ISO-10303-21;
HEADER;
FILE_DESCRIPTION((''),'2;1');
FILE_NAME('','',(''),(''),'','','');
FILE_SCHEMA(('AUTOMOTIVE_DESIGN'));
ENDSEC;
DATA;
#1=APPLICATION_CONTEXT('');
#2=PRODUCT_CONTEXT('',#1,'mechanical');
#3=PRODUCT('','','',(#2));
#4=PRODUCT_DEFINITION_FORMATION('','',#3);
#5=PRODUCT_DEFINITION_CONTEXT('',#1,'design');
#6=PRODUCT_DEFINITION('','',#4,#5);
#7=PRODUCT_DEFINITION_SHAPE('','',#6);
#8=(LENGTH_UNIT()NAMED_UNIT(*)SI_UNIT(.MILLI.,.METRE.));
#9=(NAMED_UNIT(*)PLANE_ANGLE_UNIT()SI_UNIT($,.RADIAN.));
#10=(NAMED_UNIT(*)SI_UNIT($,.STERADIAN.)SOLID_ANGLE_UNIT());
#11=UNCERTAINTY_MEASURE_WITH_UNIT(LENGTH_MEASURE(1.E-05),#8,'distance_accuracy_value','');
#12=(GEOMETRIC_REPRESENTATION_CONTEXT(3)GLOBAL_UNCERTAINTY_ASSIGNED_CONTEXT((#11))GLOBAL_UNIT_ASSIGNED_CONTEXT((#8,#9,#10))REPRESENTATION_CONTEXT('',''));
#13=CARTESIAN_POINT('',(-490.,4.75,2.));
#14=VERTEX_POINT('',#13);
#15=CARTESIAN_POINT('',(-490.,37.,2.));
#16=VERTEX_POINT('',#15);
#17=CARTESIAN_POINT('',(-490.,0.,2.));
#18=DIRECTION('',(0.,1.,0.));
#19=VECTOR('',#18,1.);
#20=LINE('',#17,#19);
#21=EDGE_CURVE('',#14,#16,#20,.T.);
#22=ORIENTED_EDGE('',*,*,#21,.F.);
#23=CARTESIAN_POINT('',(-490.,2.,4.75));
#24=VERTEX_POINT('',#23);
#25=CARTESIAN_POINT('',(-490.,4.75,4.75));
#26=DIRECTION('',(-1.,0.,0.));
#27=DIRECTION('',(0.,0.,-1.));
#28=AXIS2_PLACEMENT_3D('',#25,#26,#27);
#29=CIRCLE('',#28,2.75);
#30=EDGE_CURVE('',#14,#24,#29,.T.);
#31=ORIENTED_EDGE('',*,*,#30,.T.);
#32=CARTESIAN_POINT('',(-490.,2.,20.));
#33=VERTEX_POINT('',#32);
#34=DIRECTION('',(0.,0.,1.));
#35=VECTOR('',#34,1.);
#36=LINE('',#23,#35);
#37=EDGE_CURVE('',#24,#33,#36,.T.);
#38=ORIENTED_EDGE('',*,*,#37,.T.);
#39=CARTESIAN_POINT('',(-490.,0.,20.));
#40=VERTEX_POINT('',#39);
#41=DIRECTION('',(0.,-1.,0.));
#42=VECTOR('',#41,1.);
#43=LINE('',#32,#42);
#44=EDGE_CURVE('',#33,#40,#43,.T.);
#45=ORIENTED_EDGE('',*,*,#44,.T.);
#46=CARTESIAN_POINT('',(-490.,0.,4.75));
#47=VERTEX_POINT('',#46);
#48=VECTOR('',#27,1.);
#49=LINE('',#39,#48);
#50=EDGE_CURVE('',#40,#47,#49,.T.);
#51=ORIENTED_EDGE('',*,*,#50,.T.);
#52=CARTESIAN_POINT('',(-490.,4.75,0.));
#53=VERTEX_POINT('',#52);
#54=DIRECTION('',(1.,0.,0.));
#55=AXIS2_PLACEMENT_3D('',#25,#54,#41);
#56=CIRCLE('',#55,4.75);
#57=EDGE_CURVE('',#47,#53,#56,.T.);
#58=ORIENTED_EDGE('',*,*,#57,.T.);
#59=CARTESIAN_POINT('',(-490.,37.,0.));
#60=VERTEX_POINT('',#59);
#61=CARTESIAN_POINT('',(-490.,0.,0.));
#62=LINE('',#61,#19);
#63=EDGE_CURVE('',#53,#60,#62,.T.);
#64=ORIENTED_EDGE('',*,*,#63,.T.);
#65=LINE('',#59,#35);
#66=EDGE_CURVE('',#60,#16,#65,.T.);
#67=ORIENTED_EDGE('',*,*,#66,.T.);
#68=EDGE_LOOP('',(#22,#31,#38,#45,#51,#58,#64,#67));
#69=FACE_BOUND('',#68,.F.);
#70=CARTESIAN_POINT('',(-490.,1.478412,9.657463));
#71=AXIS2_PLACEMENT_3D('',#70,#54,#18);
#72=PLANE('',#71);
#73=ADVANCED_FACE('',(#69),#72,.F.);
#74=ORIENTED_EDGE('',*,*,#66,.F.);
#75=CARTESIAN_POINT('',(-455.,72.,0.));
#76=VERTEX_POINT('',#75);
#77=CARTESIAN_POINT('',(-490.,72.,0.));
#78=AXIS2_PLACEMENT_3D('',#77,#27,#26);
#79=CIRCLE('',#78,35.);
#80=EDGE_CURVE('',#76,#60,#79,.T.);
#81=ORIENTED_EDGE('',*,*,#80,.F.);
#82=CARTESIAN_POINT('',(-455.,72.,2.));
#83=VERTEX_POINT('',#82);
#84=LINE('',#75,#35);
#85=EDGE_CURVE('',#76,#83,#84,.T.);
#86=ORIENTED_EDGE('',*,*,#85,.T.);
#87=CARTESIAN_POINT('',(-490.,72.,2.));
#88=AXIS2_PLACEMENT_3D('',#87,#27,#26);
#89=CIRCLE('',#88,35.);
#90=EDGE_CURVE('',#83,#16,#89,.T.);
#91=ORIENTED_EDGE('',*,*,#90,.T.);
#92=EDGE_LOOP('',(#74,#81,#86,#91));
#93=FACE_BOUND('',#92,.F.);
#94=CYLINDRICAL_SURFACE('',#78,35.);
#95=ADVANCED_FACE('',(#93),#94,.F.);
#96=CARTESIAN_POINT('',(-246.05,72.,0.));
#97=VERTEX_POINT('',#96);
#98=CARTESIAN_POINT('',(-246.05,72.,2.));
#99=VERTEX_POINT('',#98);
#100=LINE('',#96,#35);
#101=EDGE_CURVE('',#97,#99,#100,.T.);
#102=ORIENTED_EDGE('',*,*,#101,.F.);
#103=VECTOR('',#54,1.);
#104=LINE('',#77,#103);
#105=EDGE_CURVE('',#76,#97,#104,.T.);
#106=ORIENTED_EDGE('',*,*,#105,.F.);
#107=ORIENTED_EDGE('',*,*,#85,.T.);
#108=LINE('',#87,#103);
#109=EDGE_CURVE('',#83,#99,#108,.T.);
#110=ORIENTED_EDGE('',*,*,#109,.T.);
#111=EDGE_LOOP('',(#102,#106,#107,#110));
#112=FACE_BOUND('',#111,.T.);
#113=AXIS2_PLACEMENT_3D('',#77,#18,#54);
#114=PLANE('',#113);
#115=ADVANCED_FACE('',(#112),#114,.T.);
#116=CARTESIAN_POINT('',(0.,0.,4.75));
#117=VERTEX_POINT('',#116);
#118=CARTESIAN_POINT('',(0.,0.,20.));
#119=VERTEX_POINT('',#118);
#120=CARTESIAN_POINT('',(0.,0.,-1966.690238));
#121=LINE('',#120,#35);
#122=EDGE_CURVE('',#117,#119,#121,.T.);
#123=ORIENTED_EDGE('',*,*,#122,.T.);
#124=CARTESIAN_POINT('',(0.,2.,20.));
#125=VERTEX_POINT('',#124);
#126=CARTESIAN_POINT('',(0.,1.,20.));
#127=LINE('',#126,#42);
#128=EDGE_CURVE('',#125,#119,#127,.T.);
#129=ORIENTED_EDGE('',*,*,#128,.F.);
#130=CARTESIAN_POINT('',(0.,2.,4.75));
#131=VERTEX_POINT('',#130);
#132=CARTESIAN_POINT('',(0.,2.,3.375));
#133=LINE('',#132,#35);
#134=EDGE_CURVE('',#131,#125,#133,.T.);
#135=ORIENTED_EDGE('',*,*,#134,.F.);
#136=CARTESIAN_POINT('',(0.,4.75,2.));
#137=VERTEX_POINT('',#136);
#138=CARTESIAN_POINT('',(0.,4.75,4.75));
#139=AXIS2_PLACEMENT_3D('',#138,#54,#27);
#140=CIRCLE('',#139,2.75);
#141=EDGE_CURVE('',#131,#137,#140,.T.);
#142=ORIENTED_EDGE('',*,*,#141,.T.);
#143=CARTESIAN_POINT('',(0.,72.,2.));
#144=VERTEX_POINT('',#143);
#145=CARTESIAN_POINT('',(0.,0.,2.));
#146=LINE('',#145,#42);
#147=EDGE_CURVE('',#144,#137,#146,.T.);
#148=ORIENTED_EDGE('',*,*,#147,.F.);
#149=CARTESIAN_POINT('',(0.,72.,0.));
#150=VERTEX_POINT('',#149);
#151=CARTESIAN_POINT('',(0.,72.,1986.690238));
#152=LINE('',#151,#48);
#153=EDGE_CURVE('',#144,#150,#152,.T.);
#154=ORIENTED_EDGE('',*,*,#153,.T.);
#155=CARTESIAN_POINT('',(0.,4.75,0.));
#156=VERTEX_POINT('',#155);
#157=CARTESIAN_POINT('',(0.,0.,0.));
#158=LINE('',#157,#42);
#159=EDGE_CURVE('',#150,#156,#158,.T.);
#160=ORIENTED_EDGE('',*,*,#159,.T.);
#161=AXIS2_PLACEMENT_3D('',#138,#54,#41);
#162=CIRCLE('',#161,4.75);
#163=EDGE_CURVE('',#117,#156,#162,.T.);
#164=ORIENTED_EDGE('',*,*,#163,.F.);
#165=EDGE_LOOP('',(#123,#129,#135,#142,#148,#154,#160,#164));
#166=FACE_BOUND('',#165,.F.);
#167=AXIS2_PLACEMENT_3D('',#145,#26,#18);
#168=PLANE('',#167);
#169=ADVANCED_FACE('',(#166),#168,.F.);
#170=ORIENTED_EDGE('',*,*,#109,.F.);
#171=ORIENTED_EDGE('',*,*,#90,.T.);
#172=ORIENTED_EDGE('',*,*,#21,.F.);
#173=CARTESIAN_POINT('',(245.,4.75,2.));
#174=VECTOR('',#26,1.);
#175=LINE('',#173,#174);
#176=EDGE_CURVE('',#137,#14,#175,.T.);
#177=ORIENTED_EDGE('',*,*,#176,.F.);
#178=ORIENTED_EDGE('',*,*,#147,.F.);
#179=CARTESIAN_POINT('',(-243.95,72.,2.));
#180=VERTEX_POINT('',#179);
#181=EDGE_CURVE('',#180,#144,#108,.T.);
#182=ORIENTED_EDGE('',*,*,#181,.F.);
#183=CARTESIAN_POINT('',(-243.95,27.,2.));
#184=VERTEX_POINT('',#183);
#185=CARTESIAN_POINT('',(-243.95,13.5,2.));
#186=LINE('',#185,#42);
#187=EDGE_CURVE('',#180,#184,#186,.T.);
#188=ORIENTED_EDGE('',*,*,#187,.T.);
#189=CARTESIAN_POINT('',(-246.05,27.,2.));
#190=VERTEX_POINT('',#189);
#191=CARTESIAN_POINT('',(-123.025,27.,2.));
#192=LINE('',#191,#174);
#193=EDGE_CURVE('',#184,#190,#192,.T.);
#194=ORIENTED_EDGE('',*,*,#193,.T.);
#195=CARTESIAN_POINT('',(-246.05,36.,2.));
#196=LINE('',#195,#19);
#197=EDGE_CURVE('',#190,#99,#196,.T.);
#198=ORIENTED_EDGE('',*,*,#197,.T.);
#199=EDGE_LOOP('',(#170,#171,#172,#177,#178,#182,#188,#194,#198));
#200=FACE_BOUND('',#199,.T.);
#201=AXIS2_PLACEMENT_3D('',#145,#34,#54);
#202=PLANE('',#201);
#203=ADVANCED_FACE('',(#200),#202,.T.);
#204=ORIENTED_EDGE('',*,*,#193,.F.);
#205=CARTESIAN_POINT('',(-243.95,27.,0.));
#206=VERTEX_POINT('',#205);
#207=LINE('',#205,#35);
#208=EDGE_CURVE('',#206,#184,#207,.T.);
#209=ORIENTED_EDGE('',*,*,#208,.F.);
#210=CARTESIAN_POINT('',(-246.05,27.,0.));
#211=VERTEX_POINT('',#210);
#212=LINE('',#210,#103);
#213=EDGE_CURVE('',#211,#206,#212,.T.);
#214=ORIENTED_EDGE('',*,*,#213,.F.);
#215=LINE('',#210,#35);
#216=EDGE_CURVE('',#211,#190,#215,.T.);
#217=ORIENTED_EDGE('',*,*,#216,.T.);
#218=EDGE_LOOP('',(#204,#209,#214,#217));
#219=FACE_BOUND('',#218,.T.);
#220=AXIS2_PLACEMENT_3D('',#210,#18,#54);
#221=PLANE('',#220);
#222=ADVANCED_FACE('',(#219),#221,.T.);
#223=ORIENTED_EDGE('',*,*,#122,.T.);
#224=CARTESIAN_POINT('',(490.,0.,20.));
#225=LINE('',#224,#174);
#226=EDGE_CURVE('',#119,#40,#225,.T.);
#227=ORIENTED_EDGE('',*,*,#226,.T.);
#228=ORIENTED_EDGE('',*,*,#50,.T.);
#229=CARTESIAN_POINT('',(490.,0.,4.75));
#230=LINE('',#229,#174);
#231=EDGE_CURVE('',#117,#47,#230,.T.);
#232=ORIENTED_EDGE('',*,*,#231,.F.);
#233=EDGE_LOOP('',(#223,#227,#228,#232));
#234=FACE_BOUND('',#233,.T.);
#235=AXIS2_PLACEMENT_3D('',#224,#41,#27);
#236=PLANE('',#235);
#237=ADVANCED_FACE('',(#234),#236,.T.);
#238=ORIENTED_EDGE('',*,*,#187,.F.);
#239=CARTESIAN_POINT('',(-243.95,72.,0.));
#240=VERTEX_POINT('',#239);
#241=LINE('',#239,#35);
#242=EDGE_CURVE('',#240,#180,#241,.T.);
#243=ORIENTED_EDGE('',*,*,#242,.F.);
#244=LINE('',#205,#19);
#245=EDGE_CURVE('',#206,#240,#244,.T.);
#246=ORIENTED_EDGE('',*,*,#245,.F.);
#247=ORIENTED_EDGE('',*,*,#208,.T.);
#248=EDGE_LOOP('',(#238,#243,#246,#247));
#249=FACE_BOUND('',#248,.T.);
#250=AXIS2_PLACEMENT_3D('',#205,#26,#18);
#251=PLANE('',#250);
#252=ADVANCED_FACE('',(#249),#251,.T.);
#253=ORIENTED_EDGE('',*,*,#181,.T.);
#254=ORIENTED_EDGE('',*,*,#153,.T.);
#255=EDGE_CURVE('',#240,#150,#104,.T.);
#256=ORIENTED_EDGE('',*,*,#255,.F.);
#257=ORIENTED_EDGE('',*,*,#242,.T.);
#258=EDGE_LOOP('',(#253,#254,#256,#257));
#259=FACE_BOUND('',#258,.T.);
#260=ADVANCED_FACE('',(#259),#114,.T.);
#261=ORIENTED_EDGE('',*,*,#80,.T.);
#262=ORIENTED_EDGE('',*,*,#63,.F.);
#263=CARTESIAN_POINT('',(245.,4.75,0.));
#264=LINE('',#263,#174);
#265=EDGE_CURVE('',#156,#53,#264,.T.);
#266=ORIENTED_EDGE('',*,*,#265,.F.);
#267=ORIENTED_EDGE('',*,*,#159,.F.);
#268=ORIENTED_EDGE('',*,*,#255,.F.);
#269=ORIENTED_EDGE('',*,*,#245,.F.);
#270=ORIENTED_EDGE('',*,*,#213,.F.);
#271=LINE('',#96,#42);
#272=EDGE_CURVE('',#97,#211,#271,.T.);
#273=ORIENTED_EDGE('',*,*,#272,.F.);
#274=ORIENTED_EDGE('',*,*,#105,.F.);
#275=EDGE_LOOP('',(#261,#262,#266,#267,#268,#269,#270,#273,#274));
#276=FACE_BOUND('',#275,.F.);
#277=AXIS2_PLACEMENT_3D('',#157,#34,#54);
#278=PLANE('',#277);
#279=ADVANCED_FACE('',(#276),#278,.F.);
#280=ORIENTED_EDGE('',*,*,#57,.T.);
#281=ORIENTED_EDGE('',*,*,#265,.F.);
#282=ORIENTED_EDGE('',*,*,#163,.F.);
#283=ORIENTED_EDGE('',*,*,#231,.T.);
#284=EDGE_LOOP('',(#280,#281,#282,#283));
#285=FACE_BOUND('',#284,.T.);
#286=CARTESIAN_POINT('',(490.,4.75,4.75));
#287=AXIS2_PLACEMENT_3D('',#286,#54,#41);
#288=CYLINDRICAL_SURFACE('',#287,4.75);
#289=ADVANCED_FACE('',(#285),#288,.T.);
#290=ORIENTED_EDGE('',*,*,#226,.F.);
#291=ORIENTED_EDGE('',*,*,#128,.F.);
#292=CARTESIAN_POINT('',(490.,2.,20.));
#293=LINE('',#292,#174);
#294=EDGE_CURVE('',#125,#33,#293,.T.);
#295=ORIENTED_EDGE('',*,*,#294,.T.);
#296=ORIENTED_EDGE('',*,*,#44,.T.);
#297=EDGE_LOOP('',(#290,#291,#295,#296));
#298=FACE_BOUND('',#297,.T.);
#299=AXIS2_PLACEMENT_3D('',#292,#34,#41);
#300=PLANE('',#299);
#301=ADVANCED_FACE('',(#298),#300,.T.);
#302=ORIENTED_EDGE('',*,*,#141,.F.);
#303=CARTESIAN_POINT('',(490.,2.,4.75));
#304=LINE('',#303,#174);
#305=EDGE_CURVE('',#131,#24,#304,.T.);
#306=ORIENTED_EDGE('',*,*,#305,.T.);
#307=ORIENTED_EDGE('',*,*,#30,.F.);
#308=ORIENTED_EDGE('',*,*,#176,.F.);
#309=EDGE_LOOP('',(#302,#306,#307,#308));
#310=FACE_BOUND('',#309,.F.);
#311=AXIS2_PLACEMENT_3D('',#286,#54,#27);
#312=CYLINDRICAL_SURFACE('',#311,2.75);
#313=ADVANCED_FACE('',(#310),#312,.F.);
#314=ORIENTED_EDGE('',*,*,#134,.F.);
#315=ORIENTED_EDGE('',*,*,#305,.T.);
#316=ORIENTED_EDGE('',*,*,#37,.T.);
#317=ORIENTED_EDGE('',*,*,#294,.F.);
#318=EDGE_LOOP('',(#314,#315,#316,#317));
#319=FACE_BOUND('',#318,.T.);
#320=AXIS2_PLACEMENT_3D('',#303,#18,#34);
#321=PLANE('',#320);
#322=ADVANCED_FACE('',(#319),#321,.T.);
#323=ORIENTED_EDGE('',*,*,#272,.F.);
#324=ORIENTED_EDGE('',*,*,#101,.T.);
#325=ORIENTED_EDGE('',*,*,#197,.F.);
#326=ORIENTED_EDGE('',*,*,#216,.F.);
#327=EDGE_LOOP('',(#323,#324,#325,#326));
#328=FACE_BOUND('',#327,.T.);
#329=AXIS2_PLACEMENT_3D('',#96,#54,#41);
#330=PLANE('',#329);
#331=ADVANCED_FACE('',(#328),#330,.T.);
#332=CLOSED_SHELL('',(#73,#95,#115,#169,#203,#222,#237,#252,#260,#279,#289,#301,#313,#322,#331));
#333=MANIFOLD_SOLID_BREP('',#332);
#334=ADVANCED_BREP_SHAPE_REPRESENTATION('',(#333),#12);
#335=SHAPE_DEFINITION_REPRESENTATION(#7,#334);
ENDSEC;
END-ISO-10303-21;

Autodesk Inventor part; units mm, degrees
ref_plane "YZ Plane" through (0, 0, 0) normal (1, 0, 0) x (0, 1, 0)
ref_plane "XZ Plane" through (0, 0, 0) normal (0, 1, 0) x (-1, 0, 0)
ref_plane "XY Plane" through (0, 0, 0) normal (0, 0, 1) x (1, 0, 0)
sketch "Sketch1" plane through (0, 0, 0) normal (0, 0, 1) x (1, 0, 0)
  line L0 (-490, 72) -> (490, 72)
  line L1 (490, 72) -> (490, 0)
  line L2 (490, 0) -> (-490, 0)
  line L3 (-490, 0) -> (-490, 72)
  point P0 (0, 0)
  point P1 (0, 0)
  dimension "d0" = 980
  dimension "d1" = 72
extrude "Plate1" add sketch "Sketch1" along normal blind 2
sketch "Sketch2" plane through (490, 2, 0) normal (0, -1, 0) x (1, 0, 0)
  line L0 (-980, 0) -> (0, 0)
  line L1 (0, 0) -> (0, 20)
  line L2 (0, 20) -> (-980, 20)
  line L3 (-980, 20) -> (-980, 0)
edge flange "Flange1" height 20 angle 90 thickness 2 bend radius 2.75 thickness toward (0, -1, 0) relief round relief width 2 relief depth 1 edges at (0, 0, 2) wall of the first edge with corners at (-490, 2, 0) (490, 2, 0) (490, 2, 20) (-490, 2, 20)
bend "Bend1"
corner "Corner1"
sketch "Sketch5" plane through (0, 0, 0) normal (0, 0, -1) x (-1, 0, 0)
  line L0 (490, 72) -> (-490, 72) projected
  line L1 (490, 0) -> (-490, 0) projected
  circle A0 centre (0, 72) radius 35
  line L2 (243.95, 72) -> (246.05, 72)
  line L3 (246.05, 72) -> (246.05, 27)
  line L4 (246.05, 27) -> (243.95, 27)
  line L5 (243.95, 27) -> (243.95, 72)
  line L6 (-243.95, 72) -> (-246.05, 72)
  line L7 (-246.05, 72) -> (-246.05, 27)
  line L8 (-246.05, 27) -> (-243.95, 27)
  line L9 (-243.95, 27) -> (-243.95, 72)
  line L10 (0, 72) -> (0, 0) construction
  line L11 (-490, 0) -> (-490, 72)
  line L12 (490, 0) -> (490, 72)
  circle A1 centre (-490, 72) radius 35
  circle A2 centre (490, 72) radius 35
  point P0 (0, 0)
  point P1 (245, 27)
  point P2 (-245, 27)
  point P3 (246.05, 72)
  point P4 (-35, 72)
  point P5 (35, 72)
  point P6 (-246.05, 72)
  point P7 (455, 72)
  point P8 (490, 37)
  point P9 (-490, 37)
  point P10 (-455, 72)
  dimension "d45" = 70
  dimension "d48" = 2.1
  dimension "d49" = 490
  dimension "d51" = 27
  dimension "d52" = 45
extrude "Extrusion1" cut sketch "Sketch5" against normal through all contours L3 L4 L5 L0 | L0 L12 A2 | L9 L8 L7 L0 | L11 L0 A1 picked at (487.4039, 48.9592) picked at (-466.9592, 69.4039)
sketch "Sketch9" plane through (0, 0, 2) normal (0, 0, 1) x (1, 0, 0)
  line L0 (-2.0322, 27.7998) -> (-2.0322, 15.7998) construction
  line L1 (-2.0322, 15.7998) -> (-202.0322, 15.7998) construction
  line L2 (-202.0322, 15.7998) -> (-202.0322, 27.7998) construction
  line L3 (-202.0322, 27.7998) -> (-2.0322, 27.7998) construction
  line L4 (-490, 72) -> (490, 72) projected
  point P0 (0, 0)
  point P1 (1.05, 68)
  point P2 (490, 72)
  point P3 (-490, 72)
  dimension "d40" = 200
  dimension "d41" = 12
mark "Mark2"
sketch "Sketch10" plane through (-243.95, 72, 2) normal (0, 0, 1) x (1, 0, 0)
  line L0 (-246.05, -72) -> (733.95, -72) projected
  line L1 (0, 0) -> (487.9, 0) projected
  line L2 (733.95, -72) -> (243.95, -72)
  line L3 (243.95, -72) -> (243.95, 0)
  line L4 (243.95, 0) -> (733.95, 0)
  line L5 (733.95, 0) -> (733.95, -72)
  point P0 (243.95, -72)
  point P1 (243.95, -72)
  dimension "d53" = 490
extrude "Extrusion4" cut sketch "Sketch10" along normal through all both and the other way through all
equation "\"d2\" = Thickness"
equation "\"d3\" = BendReliefWidth"
equation "\"d4\" = BendReliefDepth"
equation "\"d5\" = MinimumRemnant"
equation "\"d6\" = TransitionRadius"
equation "\"d9\" = BendRadius"
equation "\"d10\" = CornerReliefSize"
equation "\"d11\" = GapSize"
equation "\"d12\" = JacobiRadiusSize"
equation "\"BendReliefWidth\" = Thickness"
equation "\"BendReliefDepth\" = 0.5 * Thickness"
equation "\"CornerReliefSize\" = 4 * Thickness"
equation "\"MinimumRemnant\" = 2 * Thickness"
equation "\"TransitionRadius\" = BendRadius"
equation "\"JacobiRadiusSize\" = BendRadius"
equation "\"GapSize\" = Thickness"
equation "\"Thickness\" = 2"
equation "\"BendRadius\" = 2.75"
properties part number "MSC 321 STRINGER BOARD  ####" material "Stainless Steel"
